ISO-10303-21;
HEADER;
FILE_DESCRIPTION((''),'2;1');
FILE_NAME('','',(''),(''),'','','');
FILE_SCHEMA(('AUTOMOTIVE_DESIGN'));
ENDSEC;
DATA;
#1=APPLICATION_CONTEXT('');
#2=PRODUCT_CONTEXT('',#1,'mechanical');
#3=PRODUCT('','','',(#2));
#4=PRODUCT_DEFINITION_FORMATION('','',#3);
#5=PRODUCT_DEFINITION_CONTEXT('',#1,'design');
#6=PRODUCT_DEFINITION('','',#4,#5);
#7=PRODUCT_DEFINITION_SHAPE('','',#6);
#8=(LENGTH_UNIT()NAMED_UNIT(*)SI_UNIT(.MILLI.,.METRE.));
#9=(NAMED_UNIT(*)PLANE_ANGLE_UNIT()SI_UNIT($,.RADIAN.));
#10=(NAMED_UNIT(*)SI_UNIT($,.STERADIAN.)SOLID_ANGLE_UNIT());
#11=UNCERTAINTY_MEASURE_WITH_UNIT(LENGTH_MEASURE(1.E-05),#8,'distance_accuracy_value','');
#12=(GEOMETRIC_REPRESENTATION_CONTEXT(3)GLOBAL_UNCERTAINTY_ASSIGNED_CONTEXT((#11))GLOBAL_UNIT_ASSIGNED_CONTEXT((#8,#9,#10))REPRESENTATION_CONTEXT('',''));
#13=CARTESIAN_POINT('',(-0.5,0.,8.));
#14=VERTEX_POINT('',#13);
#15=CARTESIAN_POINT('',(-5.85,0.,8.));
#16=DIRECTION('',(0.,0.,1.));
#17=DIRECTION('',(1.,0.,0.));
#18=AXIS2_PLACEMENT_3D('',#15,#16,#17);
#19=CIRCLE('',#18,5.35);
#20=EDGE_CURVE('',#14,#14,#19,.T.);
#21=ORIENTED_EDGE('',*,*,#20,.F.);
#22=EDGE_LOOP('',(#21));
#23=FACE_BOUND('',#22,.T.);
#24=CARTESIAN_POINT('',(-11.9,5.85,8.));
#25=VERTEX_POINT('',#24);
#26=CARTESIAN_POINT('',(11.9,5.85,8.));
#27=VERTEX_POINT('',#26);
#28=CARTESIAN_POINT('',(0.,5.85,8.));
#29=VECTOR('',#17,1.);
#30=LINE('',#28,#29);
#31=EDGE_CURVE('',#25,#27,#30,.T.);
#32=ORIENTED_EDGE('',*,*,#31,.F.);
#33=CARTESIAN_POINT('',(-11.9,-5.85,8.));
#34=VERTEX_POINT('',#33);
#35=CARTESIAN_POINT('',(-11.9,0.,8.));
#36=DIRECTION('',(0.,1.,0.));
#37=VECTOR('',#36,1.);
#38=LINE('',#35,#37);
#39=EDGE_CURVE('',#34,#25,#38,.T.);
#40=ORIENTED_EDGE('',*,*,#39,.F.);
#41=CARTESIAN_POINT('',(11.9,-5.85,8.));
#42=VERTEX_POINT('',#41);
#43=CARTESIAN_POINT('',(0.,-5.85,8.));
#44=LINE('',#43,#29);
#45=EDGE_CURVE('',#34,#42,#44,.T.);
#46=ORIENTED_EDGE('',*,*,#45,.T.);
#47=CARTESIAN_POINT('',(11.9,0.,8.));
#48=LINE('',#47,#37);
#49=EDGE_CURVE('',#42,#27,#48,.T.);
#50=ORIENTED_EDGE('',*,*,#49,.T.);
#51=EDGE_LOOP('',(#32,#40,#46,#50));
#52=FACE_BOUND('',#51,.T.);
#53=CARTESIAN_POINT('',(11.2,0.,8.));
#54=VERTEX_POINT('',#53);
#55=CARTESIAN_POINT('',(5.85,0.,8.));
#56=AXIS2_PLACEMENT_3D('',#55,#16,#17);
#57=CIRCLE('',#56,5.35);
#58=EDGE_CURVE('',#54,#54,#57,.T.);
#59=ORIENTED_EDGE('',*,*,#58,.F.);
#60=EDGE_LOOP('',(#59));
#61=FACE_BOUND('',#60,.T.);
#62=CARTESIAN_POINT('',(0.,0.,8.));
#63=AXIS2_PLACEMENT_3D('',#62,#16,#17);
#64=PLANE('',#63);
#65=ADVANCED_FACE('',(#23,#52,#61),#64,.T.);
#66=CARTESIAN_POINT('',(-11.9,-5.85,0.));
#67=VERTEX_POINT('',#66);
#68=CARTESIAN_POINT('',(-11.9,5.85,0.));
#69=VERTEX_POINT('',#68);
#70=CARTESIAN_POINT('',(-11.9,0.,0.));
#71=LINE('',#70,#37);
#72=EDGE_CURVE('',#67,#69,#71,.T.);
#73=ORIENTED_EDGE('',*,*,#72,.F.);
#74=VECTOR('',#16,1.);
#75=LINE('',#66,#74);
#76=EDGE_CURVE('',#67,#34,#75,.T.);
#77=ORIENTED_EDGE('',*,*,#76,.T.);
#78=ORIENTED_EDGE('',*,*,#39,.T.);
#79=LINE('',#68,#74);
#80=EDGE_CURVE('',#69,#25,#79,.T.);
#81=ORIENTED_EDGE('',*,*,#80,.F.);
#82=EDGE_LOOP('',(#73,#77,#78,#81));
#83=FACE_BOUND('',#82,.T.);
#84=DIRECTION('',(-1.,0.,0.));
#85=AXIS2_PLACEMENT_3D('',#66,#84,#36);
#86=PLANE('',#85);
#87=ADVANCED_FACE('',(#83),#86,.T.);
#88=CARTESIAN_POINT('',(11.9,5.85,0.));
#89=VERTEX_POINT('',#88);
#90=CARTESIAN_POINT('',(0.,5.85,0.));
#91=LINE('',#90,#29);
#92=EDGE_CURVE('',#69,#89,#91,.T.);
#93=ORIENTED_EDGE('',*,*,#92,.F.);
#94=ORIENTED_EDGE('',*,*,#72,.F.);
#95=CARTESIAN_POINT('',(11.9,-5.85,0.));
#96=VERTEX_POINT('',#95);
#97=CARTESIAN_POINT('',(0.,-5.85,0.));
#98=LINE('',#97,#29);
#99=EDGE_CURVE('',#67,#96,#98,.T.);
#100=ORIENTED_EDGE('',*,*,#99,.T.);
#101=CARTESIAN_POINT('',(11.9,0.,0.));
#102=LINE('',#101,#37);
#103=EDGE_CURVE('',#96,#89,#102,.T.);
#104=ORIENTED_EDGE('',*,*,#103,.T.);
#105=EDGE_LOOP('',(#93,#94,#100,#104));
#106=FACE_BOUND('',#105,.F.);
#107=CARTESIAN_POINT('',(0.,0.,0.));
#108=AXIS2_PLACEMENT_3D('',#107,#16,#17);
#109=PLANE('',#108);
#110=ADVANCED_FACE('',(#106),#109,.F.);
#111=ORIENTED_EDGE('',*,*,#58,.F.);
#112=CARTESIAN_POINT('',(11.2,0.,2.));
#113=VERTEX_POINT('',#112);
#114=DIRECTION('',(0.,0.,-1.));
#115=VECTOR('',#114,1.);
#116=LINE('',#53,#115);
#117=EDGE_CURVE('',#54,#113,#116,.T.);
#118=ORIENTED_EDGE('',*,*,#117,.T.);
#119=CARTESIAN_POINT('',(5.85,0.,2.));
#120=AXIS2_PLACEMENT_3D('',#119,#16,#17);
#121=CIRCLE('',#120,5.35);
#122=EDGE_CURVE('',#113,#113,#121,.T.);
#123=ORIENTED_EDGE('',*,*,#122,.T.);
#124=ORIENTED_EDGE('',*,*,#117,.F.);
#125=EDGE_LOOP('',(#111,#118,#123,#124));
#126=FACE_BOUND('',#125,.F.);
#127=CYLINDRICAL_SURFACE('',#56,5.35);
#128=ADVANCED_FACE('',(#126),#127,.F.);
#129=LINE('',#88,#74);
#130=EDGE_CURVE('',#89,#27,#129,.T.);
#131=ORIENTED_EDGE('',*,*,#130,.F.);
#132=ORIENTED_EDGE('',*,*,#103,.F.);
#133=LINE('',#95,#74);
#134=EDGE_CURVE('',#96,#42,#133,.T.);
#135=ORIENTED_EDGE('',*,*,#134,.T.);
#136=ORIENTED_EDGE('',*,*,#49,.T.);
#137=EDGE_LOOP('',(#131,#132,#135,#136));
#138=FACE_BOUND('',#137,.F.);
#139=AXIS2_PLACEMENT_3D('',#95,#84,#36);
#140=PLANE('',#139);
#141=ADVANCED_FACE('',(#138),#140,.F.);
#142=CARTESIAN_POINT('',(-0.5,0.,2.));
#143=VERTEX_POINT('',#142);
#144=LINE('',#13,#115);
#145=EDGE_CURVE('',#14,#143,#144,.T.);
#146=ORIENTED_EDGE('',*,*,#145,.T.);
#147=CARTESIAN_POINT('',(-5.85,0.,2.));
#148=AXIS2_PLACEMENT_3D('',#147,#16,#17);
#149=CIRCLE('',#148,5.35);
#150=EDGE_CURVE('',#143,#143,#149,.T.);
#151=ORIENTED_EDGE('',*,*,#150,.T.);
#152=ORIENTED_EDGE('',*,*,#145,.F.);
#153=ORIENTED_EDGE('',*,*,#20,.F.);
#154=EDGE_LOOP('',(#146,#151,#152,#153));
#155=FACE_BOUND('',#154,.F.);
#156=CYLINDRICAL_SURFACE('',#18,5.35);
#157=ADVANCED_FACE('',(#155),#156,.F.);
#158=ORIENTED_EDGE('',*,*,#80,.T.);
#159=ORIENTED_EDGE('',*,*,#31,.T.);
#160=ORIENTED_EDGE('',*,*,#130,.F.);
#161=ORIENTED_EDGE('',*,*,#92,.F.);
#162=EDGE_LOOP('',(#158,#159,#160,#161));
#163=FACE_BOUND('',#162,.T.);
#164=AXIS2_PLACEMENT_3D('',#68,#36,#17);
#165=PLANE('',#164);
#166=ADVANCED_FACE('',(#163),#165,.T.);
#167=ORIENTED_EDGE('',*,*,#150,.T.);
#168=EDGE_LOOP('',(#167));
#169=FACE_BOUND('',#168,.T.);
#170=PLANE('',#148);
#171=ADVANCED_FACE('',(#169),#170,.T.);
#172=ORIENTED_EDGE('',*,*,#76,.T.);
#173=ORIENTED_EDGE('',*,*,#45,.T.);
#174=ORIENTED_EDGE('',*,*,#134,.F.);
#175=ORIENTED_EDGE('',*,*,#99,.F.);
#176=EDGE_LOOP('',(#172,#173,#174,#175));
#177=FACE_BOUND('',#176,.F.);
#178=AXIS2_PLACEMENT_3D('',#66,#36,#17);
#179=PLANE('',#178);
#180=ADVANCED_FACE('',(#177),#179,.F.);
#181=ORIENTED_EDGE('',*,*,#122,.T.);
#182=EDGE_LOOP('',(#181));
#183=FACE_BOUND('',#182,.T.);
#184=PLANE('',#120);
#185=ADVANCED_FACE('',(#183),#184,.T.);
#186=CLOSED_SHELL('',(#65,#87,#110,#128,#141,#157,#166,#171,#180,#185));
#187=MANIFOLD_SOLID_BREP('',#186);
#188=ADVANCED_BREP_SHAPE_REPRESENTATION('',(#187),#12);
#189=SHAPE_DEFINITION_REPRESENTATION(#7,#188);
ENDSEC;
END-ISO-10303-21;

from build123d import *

# Parameters (mm, degrees)
F2_W     = 23.8
F2_H     = 11.7
F3_DEPTH = 8
F4_R     = 5.35
F5_DEPTH = 6


# Not quite as in the source:
# - a feature names something its author has since deleted; it is built from what else it names


with BuildPart() as f3:
    # F2 (on Top) → F3 (new body)
    with BuildSketch(Plane.XY):
        Rectangle(F2_W, F2_H)
    extrude(amount=F3_DEPTH)

    # F4 (on face) → F5 (cut)
    with BuildSketch(Plane.XY.offset(8)):
        with Locations((-5.85, 0)):
            Circle(F4_R)
        with Locations((5.85, 0)):
            Circle(F4_R)
    extrude(amount=-F5_DEPTH, mode=Mode.SUBTRACT)


solid = f3.part
